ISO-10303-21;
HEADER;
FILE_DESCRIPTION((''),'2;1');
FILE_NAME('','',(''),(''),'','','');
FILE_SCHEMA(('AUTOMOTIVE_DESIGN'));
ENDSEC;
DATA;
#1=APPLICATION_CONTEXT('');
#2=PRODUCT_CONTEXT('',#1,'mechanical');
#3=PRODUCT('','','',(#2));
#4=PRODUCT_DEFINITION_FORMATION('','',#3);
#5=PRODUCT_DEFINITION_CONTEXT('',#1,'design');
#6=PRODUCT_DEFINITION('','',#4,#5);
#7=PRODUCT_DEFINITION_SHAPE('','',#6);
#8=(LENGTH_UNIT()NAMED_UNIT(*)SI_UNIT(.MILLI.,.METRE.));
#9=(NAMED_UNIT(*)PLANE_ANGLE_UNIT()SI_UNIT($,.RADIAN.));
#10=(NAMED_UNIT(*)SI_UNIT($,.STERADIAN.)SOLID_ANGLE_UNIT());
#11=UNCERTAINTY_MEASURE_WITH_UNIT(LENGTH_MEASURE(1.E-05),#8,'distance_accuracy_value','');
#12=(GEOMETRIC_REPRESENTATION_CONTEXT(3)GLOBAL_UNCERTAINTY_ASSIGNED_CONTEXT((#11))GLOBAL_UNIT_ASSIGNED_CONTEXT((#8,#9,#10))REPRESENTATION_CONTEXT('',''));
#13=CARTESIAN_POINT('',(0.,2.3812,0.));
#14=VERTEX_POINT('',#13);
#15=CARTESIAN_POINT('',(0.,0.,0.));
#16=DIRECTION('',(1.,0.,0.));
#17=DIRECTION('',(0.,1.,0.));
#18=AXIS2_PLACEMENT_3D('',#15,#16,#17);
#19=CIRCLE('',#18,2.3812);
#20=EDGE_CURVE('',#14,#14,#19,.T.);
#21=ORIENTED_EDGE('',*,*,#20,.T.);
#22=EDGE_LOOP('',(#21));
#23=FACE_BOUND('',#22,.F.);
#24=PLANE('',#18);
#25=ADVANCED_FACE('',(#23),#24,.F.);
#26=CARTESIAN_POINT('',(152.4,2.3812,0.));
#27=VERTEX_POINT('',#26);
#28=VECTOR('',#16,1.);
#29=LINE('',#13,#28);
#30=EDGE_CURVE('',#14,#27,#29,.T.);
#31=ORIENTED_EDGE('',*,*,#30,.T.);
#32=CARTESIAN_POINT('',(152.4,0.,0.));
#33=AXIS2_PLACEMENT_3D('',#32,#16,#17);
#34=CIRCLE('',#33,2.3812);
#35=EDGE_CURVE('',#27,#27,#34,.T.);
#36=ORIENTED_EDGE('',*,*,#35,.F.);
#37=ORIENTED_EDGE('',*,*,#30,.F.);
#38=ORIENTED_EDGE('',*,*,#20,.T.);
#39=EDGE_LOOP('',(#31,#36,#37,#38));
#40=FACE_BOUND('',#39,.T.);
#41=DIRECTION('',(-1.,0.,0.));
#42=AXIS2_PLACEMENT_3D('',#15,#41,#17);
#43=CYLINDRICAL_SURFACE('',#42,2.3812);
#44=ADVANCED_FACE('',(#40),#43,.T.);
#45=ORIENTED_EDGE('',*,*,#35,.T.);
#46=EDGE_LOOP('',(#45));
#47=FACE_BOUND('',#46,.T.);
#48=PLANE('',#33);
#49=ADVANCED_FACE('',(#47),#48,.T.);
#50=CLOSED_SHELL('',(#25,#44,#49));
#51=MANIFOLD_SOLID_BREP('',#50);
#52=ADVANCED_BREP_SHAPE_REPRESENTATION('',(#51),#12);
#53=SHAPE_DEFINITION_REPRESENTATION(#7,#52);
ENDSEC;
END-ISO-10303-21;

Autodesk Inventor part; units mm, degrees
ref_plane "YZ Plane" through (0, 0, 0) normal (1, 0, 0) x (0, 1, 0)
ref_plane "XZ Plane" through (0, 0, 0) normal (0, 1, 0) x (-1, 0, 0)
ref_plane "XY Plane" through (0, 0, 0) normal (0, 0, 1) x (1, 0, 0)
sketch "Sketch1" plane through (0, 0, 0) normal (1, 0, 0) x (0, 1, 0)
  circle A0 centre (0, 0) radius 2.3812
  dimension "d0" = 4.7625
extrude "Extrusion1" add sketch "Sketch1" along normal blind 152.4
properties part number "piston stand in"
